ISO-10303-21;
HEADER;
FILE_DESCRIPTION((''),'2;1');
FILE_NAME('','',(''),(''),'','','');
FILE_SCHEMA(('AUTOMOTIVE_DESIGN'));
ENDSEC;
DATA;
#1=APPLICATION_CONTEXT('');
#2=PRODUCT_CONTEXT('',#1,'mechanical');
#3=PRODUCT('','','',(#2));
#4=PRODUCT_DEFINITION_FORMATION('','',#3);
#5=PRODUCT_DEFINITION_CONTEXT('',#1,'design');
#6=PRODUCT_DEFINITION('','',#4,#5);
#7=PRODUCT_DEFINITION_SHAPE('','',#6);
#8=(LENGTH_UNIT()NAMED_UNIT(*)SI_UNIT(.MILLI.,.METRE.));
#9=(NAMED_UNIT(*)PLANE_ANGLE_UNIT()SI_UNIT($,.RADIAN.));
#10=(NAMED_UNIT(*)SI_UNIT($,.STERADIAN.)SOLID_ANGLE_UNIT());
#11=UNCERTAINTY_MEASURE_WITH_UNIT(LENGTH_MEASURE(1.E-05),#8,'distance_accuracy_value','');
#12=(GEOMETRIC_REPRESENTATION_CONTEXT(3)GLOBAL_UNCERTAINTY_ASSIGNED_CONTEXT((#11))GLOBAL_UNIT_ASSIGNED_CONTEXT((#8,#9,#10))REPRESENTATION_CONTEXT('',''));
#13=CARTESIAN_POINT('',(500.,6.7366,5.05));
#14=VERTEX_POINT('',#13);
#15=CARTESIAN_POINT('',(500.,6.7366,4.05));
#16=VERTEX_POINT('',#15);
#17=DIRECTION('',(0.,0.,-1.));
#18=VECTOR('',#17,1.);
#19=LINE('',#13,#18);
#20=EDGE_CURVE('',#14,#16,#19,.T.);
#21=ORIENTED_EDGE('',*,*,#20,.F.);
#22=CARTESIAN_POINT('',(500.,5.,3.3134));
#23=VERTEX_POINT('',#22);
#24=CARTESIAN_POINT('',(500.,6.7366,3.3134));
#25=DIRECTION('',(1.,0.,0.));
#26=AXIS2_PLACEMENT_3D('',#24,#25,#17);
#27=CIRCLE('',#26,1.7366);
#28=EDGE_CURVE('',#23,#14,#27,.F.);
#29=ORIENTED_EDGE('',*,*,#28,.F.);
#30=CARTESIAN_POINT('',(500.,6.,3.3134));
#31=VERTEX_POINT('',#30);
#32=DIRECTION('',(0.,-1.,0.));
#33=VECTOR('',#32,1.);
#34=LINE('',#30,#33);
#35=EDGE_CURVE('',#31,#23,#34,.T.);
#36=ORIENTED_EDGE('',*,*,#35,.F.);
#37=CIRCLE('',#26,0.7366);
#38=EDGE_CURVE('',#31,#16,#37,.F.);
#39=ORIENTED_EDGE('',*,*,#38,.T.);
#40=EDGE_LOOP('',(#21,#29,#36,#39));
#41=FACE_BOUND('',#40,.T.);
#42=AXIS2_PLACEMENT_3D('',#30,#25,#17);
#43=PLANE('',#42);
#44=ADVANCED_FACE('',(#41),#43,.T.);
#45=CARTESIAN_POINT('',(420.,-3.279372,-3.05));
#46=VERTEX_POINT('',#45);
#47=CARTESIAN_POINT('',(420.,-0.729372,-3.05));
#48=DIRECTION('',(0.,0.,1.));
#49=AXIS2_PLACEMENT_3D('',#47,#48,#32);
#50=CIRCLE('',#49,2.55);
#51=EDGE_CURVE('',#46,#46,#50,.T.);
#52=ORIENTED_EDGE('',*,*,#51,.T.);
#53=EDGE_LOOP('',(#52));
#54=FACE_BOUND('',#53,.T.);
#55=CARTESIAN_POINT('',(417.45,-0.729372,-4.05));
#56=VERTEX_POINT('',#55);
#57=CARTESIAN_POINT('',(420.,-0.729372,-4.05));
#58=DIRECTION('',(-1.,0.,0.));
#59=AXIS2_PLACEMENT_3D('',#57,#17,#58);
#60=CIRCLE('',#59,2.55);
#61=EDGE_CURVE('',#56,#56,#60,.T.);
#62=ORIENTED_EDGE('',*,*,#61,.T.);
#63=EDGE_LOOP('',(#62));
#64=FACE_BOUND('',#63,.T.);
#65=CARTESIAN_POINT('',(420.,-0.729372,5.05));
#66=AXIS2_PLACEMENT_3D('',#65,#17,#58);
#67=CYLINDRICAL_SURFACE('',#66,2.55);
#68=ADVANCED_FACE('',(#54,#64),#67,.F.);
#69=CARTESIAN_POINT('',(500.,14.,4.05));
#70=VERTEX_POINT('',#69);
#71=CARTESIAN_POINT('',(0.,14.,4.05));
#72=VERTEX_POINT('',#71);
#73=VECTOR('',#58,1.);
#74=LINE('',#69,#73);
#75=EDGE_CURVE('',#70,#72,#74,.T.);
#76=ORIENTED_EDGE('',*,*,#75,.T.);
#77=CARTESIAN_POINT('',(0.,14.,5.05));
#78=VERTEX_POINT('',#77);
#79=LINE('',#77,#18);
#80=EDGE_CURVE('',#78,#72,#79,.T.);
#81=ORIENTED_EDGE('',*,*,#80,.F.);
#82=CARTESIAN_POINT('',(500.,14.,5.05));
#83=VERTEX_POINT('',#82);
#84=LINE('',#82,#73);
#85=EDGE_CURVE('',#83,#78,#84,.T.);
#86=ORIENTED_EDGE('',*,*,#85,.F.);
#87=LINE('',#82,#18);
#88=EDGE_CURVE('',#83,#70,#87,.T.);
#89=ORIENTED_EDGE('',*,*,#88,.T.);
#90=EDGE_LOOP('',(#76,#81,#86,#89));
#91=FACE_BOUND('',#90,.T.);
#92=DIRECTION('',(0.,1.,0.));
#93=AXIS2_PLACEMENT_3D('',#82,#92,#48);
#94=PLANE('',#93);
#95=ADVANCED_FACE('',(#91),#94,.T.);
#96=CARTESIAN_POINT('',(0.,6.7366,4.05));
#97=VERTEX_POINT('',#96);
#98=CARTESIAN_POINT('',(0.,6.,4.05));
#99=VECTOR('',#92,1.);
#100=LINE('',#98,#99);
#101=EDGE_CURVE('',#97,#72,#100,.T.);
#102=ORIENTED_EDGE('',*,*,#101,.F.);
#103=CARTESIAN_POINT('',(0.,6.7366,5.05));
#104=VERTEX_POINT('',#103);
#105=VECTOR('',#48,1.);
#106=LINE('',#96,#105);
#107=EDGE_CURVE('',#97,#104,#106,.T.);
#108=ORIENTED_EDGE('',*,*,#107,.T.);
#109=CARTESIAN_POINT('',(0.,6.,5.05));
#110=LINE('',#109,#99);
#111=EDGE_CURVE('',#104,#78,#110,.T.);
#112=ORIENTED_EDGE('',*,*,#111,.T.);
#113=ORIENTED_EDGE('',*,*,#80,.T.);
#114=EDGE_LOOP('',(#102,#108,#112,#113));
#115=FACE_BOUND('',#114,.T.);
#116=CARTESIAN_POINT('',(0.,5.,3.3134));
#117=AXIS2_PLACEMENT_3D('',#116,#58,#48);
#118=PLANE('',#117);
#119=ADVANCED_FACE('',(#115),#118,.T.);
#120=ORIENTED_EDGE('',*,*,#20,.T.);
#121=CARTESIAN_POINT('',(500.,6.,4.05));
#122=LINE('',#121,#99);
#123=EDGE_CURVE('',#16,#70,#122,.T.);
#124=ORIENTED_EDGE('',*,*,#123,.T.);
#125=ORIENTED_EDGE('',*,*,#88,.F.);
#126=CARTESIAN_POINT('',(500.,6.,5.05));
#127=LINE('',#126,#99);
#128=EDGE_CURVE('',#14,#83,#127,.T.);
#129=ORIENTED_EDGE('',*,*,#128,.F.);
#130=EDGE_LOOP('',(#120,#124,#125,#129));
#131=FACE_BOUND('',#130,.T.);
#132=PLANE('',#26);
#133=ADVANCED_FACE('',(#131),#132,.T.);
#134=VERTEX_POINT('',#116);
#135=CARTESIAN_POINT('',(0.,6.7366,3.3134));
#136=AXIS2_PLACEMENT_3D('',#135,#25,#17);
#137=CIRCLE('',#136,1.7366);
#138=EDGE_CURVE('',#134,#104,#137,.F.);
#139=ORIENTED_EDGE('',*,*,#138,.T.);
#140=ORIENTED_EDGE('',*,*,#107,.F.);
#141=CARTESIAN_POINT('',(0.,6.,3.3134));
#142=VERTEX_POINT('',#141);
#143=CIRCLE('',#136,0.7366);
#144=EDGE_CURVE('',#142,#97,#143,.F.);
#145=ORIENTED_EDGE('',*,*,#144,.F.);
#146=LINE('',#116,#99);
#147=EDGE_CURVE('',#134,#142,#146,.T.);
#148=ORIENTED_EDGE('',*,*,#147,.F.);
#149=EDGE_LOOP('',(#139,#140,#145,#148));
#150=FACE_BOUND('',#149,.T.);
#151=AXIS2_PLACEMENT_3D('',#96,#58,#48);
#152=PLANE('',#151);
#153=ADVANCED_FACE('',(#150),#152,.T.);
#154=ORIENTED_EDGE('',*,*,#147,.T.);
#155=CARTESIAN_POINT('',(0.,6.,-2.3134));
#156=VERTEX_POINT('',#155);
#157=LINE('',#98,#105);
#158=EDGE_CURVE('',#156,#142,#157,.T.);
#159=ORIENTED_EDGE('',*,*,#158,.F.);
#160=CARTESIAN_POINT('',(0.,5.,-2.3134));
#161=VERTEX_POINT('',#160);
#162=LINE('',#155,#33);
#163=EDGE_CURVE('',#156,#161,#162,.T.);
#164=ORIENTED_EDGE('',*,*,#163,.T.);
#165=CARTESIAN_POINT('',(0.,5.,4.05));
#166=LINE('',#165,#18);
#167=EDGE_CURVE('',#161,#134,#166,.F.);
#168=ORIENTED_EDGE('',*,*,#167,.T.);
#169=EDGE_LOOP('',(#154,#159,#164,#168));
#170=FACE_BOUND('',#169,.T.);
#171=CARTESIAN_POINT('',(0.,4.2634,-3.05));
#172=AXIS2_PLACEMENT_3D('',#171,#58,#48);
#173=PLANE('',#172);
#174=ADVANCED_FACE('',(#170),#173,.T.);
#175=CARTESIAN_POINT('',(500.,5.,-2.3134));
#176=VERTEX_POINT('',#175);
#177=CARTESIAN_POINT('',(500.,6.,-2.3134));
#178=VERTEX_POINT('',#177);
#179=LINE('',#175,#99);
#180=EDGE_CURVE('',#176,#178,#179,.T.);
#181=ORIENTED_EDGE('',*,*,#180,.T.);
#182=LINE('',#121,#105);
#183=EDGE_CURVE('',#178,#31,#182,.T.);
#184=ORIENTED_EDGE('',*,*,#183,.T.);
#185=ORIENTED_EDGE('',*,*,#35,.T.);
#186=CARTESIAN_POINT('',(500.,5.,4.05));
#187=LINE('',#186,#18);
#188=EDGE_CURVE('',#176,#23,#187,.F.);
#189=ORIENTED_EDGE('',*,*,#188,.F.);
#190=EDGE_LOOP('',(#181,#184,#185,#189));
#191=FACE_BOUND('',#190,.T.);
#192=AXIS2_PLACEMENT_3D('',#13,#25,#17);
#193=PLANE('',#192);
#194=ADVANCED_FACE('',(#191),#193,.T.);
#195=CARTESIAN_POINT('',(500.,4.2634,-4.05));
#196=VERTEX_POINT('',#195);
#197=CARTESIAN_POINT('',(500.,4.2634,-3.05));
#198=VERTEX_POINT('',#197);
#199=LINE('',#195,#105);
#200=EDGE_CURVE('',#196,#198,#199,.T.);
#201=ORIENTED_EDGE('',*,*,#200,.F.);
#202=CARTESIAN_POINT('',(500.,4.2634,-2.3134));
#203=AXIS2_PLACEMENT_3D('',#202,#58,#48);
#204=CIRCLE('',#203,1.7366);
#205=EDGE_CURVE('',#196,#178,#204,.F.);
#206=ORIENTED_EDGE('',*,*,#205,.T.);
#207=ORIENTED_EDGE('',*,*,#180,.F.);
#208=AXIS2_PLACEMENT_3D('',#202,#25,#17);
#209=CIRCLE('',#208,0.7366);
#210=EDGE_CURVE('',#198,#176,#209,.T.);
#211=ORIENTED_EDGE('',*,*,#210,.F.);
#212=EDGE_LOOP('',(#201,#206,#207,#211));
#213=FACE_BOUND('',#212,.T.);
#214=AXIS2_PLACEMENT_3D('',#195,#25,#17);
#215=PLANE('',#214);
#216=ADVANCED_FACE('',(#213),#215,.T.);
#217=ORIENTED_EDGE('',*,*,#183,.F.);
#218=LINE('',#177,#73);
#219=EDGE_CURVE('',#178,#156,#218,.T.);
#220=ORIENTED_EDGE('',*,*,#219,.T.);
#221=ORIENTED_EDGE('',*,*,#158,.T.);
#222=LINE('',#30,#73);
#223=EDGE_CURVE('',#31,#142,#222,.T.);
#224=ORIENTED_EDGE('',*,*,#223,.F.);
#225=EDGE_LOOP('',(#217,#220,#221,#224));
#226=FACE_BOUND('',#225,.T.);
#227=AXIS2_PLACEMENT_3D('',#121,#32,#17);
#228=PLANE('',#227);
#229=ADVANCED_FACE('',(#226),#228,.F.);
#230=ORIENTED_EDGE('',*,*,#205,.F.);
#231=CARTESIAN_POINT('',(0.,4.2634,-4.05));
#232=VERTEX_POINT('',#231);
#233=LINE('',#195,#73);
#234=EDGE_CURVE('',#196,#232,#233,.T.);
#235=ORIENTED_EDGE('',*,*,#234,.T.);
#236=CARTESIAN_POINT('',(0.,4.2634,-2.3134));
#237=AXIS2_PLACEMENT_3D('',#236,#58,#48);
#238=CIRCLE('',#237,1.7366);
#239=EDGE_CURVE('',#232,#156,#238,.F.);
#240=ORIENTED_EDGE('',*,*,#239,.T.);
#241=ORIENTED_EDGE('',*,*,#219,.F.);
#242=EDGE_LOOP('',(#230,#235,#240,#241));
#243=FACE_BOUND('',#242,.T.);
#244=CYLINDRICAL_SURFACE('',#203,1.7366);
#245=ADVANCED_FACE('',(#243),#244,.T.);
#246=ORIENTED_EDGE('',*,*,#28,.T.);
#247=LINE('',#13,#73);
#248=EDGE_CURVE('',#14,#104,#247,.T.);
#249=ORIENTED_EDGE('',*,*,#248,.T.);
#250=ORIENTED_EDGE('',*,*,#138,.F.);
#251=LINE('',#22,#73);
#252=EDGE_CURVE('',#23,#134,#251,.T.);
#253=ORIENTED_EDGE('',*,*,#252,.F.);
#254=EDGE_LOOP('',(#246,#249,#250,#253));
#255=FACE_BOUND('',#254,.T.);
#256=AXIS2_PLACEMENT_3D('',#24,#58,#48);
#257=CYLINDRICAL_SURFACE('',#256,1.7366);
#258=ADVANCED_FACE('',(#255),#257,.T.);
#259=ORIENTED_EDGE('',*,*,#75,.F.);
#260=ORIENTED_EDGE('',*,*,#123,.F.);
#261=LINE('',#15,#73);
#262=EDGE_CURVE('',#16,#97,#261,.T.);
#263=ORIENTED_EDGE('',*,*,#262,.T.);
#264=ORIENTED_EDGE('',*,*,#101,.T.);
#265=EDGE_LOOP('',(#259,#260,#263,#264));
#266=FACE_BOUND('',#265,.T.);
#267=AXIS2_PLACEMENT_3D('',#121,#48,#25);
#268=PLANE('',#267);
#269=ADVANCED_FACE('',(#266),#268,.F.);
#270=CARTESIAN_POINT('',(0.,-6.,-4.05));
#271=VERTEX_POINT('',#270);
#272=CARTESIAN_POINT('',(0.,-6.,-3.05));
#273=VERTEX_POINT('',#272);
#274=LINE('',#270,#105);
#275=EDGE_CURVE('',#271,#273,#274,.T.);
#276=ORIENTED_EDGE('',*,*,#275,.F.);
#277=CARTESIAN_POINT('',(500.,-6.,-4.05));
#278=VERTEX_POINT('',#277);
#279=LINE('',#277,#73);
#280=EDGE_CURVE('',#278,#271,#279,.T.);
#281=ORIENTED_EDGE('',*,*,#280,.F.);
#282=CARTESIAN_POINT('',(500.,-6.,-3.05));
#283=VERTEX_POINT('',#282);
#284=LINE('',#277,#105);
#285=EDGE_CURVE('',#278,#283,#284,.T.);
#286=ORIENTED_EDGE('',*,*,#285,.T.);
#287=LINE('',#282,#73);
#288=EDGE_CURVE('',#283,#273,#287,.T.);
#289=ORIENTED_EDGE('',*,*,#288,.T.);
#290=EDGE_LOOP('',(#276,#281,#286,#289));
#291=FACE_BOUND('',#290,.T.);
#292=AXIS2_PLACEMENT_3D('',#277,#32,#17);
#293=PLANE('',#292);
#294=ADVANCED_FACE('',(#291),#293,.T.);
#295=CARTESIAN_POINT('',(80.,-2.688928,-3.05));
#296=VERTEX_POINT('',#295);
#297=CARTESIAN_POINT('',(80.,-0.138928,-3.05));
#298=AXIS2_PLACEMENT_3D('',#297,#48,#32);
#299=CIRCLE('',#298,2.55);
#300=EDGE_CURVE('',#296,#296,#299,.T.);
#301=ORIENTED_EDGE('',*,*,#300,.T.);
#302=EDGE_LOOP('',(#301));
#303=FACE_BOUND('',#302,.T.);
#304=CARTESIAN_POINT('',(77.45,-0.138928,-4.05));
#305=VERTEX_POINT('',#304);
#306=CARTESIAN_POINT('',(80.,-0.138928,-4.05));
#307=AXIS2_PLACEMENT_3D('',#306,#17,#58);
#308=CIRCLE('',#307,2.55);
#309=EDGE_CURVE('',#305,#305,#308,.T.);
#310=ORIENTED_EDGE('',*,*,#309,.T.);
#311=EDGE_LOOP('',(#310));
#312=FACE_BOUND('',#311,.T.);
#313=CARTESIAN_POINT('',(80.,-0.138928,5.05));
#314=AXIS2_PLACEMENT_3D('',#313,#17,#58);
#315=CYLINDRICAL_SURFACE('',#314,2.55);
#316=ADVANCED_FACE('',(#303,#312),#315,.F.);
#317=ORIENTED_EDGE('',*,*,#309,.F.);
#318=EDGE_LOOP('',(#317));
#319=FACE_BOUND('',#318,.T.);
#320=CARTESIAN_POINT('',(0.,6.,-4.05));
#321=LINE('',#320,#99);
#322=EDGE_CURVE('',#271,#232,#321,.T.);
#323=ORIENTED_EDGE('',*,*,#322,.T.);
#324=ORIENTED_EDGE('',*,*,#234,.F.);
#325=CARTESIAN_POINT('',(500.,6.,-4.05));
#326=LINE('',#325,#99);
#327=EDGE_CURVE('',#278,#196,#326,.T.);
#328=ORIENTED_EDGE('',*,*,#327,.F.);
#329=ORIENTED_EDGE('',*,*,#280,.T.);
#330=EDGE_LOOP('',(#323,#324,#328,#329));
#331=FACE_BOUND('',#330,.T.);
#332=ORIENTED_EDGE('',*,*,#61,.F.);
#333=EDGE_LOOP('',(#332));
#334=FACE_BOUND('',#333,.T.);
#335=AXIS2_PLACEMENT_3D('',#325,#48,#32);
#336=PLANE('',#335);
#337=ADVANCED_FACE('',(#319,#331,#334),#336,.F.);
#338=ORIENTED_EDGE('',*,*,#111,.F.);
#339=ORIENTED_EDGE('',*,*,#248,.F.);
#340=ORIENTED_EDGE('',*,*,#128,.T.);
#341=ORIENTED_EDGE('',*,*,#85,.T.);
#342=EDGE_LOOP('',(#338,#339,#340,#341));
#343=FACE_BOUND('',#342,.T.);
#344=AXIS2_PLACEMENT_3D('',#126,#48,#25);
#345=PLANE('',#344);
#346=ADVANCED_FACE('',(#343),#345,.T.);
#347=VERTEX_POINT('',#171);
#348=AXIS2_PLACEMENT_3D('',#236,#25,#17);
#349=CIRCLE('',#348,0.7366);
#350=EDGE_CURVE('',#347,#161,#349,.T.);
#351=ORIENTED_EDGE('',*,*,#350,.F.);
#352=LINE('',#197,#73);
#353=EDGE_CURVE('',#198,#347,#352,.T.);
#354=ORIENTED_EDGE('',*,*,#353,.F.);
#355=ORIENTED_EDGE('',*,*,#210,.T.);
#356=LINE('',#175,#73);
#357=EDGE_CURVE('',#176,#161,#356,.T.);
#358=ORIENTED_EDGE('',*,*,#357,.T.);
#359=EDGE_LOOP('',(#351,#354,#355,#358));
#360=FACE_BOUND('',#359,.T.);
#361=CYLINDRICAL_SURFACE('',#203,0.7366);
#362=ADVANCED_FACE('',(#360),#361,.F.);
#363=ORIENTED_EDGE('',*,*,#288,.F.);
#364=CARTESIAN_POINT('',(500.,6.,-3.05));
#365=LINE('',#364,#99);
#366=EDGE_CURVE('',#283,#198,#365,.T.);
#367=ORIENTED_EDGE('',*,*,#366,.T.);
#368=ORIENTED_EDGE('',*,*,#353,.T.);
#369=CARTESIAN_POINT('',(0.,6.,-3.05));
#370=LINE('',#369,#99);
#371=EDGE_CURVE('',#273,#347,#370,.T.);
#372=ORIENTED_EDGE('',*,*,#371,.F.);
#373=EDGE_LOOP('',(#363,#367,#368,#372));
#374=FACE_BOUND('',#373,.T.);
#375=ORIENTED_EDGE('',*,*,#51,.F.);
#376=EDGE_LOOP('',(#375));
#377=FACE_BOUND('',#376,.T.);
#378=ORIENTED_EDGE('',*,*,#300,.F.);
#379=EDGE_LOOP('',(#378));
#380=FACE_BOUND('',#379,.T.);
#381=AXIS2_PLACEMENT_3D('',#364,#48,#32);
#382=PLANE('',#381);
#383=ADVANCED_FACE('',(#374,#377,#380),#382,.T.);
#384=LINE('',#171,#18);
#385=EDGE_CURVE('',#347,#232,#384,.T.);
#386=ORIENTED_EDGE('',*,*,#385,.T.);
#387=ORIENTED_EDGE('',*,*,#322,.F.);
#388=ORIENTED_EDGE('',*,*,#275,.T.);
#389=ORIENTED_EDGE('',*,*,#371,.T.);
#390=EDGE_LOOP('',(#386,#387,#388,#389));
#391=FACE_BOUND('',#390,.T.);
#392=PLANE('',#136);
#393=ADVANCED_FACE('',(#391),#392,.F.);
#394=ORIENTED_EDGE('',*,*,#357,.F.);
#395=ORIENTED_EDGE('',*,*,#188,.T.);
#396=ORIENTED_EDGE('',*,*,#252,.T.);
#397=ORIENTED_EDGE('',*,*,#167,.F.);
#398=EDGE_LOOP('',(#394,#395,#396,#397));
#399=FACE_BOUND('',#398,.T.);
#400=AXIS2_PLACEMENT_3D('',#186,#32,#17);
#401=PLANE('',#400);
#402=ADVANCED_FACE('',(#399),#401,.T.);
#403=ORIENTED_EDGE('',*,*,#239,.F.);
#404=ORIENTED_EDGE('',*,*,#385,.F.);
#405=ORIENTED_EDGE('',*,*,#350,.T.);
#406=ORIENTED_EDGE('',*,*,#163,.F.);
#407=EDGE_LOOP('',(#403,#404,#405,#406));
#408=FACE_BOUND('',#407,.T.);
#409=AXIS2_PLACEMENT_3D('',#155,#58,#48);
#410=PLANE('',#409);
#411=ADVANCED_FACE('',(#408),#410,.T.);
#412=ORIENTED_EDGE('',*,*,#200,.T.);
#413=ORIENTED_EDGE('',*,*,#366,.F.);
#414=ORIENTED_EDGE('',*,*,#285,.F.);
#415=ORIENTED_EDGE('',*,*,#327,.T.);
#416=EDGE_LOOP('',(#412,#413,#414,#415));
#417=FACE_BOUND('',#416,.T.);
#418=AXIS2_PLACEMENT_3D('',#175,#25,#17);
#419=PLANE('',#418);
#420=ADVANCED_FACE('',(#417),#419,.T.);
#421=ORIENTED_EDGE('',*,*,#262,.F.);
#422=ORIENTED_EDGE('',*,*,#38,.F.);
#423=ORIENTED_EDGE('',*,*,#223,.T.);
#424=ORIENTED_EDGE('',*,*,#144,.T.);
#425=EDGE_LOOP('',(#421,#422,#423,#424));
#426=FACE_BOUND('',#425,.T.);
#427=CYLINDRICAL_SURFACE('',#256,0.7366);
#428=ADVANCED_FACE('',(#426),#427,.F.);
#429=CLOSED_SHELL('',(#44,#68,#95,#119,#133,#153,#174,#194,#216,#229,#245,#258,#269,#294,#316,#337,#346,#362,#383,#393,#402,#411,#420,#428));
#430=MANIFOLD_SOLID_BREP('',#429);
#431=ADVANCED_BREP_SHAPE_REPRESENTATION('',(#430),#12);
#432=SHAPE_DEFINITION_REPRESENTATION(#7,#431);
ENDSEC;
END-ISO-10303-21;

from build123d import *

# Parameters (mm, degrees)
BASE_FLANGE1_DEPTH = 500
SKETCH4_R          = 2.55
CUT_EXTRUDE1_DEPTH = 501.278732308


# Sheet-metal steps are written as plain solids
with BuildPart() as part:
    # Sketch1 → Base-Flange1 (new body)
    with BuildSketch(Plane(origin=(0, 0, 0), x_dir=(0, 0, -1), z_dir=(1, 0, 0))):
        with BuildLine():
            Line((4.05, -6), (4.05, 4.2634))
            ThreePointArc((4.05, 4.2634), (3.541361636, 5.491361636), (2.3134, 6))
            Line((2.3134, 6), (-3.3134, 6))
            ThreePointArc((-3.3134, 6), (-3.834254855, 6.215745145), (-4.05, 6.7366))
            Line((-4.05, 6.7366), (-4.05, 14))
            Line((-4.05, 14), (-5.05, 14))
            Line((-5.05, 14), (-5.05, 6.7366))
            ThreePointArc((-5.05, 6.7366), (-4.541361636, 5.508638364), (-3.3134, 5))
            Line((-3.3134, 5), (2.3134, 5))
            ThreePointArc((2.3134, 5), (2.834254855, 4.784254855), (3.05, 4.2634))
            Line((3.05, 4.2634), (3.05, -6))
            Line((3.05, -6), (4.05, -6))
        make_face()
    extrude(amount=BASE_FLANGE1_DEPTH)

    # Sketch4 → Cut-Extrude1 (cut, through all)
    with BuildSketch(Plane(origin=(0, 0, -4.05), x_dir=(-1, 0, 0), z_dir=(0, 0, -1))):
        with Locations((-420, -0.729372)):
            Circle(SKETCH4_R)
        with Locations((-80, -0.138928)):
            Circle(SKETCH4_R)
    extrude(amount=-CUT_EXTRUDE1_DEPTH, mode=Mode.SUBTRACT)


solid = part.part
